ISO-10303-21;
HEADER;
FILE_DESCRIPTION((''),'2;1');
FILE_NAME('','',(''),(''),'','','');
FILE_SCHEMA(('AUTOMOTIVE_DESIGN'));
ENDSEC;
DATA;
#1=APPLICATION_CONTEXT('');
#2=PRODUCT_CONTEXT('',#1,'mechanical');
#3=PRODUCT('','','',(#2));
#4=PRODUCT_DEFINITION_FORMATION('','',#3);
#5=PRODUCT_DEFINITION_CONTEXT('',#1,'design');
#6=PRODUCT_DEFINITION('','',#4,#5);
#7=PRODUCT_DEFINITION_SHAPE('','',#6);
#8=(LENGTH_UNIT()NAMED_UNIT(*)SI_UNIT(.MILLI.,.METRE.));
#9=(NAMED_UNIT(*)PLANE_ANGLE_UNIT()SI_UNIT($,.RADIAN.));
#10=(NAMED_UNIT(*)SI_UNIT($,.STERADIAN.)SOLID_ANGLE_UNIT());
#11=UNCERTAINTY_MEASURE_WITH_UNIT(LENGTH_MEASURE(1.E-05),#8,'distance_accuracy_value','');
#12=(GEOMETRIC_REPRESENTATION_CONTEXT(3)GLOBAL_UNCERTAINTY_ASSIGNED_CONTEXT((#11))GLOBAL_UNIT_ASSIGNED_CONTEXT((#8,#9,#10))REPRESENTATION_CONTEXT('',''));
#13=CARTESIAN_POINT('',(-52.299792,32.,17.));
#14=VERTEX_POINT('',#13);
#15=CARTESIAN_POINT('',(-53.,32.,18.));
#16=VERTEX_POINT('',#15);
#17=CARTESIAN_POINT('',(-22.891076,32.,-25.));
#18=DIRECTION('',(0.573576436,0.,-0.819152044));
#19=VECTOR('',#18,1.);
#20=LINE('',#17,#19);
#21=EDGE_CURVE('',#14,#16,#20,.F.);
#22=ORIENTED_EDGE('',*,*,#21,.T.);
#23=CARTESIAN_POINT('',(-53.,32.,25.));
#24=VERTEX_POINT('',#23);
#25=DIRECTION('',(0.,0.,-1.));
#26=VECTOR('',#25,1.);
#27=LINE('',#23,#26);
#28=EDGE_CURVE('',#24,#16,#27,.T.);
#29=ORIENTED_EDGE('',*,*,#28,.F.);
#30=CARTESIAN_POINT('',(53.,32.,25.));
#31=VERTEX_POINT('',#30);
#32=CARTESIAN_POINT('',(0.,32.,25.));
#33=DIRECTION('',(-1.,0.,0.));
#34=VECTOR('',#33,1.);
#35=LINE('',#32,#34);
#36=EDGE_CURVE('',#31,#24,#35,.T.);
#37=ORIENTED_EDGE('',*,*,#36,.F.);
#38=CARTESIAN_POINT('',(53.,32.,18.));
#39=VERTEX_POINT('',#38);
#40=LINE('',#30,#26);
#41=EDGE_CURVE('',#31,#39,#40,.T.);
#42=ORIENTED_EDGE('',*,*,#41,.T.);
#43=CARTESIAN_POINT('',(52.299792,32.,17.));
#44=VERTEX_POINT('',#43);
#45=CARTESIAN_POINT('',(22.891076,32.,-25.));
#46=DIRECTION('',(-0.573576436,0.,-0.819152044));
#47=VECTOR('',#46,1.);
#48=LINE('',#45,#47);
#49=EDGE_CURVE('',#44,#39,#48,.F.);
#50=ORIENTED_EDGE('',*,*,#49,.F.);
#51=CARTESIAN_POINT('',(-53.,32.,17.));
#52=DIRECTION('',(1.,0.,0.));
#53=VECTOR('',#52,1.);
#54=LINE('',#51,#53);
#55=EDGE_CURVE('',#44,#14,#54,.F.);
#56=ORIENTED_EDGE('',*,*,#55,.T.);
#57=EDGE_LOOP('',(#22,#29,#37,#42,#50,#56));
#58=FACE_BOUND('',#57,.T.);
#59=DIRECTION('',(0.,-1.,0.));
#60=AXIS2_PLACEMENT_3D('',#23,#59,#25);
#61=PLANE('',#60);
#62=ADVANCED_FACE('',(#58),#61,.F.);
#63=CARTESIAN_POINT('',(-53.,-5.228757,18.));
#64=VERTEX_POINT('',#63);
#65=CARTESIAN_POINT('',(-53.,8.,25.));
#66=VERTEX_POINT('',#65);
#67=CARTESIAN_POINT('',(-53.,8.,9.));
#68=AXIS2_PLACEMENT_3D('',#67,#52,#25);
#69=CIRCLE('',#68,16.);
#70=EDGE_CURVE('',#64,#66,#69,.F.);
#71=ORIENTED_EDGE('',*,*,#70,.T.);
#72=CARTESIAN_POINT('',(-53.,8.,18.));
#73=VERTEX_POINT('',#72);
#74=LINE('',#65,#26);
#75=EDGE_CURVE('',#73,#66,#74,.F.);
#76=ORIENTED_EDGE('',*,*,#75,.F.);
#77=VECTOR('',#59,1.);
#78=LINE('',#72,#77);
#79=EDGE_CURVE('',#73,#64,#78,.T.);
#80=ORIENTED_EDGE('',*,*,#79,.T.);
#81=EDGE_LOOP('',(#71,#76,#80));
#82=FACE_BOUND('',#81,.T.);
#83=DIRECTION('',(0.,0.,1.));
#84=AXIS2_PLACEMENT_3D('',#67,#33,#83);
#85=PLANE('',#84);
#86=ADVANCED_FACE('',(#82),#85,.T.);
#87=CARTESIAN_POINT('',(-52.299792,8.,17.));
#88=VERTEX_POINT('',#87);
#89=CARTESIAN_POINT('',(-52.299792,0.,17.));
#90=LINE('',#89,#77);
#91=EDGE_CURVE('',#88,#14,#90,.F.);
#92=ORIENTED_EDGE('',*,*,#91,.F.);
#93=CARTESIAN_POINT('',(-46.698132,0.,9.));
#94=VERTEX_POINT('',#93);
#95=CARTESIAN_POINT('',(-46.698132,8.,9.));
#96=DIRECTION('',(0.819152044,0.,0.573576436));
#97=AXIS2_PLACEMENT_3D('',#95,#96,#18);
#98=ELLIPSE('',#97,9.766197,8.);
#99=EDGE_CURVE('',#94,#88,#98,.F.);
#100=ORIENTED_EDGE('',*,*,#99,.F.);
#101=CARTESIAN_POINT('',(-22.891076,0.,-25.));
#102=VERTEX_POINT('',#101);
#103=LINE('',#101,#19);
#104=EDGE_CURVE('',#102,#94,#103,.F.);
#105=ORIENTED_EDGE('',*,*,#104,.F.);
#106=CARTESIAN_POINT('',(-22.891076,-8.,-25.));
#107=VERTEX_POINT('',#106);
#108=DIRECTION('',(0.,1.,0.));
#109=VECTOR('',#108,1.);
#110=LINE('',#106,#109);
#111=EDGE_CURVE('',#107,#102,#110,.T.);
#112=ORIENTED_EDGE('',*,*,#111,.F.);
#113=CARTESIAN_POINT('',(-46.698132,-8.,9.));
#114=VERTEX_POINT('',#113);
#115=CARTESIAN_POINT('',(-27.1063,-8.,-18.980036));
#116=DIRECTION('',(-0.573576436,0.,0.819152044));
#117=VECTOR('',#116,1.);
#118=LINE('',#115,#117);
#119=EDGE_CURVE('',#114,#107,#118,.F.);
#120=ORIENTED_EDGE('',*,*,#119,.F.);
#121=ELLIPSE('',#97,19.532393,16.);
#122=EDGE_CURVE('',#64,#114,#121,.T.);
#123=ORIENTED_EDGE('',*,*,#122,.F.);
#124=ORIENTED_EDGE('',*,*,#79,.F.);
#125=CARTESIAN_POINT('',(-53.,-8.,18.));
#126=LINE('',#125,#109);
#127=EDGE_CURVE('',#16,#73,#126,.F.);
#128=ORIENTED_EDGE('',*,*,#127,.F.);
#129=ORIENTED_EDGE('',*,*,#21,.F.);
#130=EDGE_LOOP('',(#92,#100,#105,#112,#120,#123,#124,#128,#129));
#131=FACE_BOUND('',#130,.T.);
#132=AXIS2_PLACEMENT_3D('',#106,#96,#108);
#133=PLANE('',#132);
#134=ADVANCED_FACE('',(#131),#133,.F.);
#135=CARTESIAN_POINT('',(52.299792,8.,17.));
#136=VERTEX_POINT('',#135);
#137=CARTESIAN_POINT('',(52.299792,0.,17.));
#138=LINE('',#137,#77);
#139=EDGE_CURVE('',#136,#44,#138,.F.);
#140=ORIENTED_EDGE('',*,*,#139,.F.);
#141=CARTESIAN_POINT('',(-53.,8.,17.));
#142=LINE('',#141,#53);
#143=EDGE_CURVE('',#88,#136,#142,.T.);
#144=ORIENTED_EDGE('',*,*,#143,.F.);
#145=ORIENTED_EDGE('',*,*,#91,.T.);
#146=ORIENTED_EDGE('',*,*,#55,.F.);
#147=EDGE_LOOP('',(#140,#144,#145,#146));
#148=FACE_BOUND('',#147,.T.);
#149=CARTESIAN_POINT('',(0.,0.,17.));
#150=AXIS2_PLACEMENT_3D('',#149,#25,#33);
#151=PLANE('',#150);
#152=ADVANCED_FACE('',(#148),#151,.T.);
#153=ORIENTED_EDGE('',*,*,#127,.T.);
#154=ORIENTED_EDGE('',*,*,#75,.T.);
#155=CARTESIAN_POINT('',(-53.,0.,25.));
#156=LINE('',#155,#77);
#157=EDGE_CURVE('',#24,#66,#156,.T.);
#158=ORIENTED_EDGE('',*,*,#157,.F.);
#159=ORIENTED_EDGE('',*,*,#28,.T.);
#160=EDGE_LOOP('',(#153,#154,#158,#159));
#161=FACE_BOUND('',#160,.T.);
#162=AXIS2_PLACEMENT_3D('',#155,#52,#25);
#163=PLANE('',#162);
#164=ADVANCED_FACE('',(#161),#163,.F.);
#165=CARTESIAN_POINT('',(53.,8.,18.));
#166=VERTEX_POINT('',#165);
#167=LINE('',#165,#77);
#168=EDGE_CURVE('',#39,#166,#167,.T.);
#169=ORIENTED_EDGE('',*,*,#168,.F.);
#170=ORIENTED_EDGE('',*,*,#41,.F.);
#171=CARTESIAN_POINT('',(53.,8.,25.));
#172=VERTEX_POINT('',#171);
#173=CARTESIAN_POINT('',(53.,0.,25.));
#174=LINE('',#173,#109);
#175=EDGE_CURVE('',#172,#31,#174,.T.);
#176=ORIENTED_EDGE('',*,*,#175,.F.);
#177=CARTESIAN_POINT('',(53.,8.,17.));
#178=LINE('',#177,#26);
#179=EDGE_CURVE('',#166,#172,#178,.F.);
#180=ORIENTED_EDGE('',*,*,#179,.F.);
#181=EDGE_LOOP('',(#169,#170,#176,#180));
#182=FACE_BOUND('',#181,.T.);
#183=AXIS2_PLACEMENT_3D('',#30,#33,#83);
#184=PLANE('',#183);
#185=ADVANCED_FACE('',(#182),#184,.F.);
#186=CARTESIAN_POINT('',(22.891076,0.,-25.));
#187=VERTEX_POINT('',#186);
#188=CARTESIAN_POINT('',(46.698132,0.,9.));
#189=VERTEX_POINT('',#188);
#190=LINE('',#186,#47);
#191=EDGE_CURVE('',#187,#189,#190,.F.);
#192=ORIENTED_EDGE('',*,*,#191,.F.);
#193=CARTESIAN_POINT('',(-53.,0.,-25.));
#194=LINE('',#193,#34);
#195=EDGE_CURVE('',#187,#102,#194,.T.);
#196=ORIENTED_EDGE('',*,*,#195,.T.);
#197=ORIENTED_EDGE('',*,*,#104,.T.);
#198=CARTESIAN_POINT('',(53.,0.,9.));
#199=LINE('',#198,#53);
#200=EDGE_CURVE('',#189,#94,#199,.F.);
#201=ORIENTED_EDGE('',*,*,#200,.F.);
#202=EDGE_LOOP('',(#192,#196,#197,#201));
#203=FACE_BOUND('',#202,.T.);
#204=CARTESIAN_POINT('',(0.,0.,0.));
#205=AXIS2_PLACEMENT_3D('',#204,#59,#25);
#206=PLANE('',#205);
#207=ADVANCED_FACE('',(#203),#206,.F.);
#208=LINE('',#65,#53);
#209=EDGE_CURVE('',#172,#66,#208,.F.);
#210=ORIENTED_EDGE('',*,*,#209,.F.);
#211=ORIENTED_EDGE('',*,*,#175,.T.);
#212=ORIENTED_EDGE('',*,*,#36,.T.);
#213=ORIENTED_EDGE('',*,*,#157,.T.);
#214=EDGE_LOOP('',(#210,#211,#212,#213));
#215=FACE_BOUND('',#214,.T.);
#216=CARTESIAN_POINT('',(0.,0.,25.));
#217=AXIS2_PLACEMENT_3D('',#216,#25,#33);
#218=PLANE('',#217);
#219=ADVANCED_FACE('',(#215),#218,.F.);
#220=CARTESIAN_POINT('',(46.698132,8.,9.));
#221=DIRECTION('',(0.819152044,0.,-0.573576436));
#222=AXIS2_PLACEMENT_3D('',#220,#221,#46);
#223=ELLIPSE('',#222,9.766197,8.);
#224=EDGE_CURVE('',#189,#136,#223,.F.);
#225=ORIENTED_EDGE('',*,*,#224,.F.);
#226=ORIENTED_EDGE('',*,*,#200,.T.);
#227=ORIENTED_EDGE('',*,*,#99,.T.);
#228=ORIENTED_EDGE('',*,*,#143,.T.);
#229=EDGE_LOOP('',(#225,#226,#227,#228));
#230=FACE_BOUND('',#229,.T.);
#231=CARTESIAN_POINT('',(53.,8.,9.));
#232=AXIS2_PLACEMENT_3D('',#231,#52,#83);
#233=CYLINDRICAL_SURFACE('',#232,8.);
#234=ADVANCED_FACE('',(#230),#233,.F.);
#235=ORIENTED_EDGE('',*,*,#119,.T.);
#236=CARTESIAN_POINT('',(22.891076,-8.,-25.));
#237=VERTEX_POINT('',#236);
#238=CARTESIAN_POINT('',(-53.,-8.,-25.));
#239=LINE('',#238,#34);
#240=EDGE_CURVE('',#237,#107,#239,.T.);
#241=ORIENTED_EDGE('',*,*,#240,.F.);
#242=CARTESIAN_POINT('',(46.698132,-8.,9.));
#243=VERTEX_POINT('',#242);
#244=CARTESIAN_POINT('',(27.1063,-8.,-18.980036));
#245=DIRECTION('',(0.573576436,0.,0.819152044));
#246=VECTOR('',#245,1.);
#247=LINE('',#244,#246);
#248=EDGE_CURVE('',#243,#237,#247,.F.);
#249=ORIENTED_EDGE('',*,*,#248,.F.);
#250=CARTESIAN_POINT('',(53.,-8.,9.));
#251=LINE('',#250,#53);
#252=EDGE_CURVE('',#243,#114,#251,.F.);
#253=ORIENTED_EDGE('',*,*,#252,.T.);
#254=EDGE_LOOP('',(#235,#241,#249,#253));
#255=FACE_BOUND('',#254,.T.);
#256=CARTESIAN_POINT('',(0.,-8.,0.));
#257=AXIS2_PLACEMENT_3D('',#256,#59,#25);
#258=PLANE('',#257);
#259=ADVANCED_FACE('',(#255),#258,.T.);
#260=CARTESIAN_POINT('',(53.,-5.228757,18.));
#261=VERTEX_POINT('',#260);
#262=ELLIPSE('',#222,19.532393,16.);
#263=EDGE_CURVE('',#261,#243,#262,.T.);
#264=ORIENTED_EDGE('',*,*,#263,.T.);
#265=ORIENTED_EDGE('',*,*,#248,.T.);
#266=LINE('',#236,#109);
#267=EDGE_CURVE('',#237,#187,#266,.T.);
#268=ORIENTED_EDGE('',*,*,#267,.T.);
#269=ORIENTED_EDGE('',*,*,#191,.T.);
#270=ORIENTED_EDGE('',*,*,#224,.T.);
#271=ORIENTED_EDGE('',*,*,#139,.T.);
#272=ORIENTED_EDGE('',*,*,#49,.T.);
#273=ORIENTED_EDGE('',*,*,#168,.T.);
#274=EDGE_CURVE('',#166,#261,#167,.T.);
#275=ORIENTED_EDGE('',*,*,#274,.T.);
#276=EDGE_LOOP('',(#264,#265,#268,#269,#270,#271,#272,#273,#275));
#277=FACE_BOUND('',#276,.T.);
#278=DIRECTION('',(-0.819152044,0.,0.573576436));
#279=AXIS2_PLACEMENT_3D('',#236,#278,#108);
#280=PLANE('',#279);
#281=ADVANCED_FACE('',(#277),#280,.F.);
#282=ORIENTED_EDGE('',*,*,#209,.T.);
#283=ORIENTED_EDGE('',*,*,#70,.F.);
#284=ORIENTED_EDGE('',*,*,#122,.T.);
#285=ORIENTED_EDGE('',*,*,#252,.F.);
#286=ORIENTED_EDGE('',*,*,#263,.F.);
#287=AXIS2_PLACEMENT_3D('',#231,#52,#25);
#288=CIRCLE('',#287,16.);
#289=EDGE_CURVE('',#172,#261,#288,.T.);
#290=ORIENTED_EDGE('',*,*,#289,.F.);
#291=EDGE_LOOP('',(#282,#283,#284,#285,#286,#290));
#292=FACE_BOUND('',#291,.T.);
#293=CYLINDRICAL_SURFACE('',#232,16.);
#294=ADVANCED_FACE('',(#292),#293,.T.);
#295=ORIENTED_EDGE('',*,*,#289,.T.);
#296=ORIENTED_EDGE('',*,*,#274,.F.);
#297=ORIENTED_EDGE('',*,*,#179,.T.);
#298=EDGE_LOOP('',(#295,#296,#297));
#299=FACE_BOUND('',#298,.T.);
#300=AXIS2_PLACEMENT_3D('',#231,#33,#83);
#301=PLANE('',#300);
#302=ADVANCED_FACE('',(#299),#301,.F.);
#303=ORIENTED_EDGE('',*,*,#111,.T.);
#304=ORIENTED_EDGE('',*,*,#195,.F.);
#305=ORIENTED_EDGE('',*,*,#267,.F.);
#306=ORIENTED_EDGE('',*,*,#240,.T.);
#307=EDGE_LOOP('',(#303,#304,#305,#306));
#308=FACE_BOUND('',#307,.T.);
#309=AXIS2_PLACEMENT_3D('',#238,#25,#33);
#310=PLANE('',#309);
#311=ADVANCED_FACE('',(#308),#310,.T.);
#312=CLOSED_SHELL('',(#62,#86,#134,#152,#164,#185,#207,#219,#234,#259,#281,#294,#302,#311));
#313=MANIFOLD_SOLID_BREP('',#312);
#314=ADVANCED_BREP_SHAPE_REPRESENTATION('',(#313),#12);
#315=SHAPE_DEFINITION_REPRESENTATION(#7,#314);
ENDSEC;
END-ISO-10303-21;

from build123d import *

# Parameters (mm, degrees)
SKETCH1_W                    = 106
SKETCH1_H                    = 50
BASE_FLANGE1_DEPTH           = 8
EDGE_FLANGE1_STRIP_W         = 48
EDGE_FLANGE1_STRIP_H         = 8
EDGE_FLANGE1_STRIP_CUT_DEPTH = 106
EDGE_FLANGE1_DEPTH           = 106
CHAMFER1_SIZE                = 43
CHAMFER1_SIZE2               = 30.108924143
MIRROR3_START                = 33.090682493
MIRROR3_OUTLINE_W            = 56
MIRROR3_OUTLINE_H            = 41
MIRROR3_DEPTH                = 24.663786763


# Read off the part's stored shape, not the designer's step: Mirror3
# Sheet-metal steps are written as plain solids
with BuildPart() as part:
    # Sketch1 → Base-Flange1 (new body)
    with BuildSketch(Plane(origin=(0, 0, 0), x_dir=(1, 0, 0), z_dir=(0, 1, 0))):
        Rectangle(SKETCH1_W, SKETCH1_H)
    extrude(amount=-BASE_FLANGE1_DEPTH)

    # Edge-Flange1 strip (across the edge) → Edge-Flange1 strip cut (cut)
    with BuildSketch(Plane(origin=(-53, 0, 25), x_dir=(0, 0, -1), z_dir=(1, 0, 0))):
        with Locations((-8, -4)):
            Rectangle(EDGE_FLANGE1_STRIP_W, EDGE_FLANGE1_STRIP_H)
    extrude(amount=EDGE_FLANGE1_STRIP_CUT_DEPTH, mode=Mode.SUBTRACT)

    # Edge-Flange1 section (across the edge) → Edge-Flange1 (add)
    with BuildSketch(Plane(origin=(-53, 0, 25), x_dir=(0, 0, -1), z_dir=(1, 0, 0))):
        with BuildLine():
            Line((0, 8), (0, 32))
            Line((0, 32), (8, 32))
            Line((8, 32), (8, 8))
            ThreePointArc((8, 8), (10.343145751, 2.343145751), (16, 0))
            Line((16, 0), (16, -8))
            ThreePointArc((16, -8), (4.686291501, -3.313708499), (0, 8))
        make_face()
    extrude(amount=EDGE_FLANGE1_DEPTH)

    # Chamfer1
    chamfer1_edges = [part.edges().sort_by_distance(p)[0] for p in [
        (-53, -4, -25),
    ]]
    chamfer1_side = [part.faces().sort_by_distance(p)[0] for p in [
        (-53, -0.640312424, -8),
    ]]
    chamfer(chamfer1_edges, length=CHAMFER1_SIZE, length2=CHAMFER1_SIZE2, reference=chamfer1_side[0])

    # Mirror3 outline → Mirror3 (cut)
    with BuildSketch(Plane(origin=(0, 0, 0), x_dir=(0.5735764363510512, 0, 0.8191520442889882), z_dir=(0.8191520442889882, 0, -0.5735764363510512)).offset(MIRROR3_START)):
        with Locations((19, -12.5)):
            Rectangle(MIRROR3_OUTLINE_W, MIRROR3_OUTLINE_H)
    extrude(amount=MIRROR3_DEPTH, mode=Mode.SUBTRACT)


solid = part.part
